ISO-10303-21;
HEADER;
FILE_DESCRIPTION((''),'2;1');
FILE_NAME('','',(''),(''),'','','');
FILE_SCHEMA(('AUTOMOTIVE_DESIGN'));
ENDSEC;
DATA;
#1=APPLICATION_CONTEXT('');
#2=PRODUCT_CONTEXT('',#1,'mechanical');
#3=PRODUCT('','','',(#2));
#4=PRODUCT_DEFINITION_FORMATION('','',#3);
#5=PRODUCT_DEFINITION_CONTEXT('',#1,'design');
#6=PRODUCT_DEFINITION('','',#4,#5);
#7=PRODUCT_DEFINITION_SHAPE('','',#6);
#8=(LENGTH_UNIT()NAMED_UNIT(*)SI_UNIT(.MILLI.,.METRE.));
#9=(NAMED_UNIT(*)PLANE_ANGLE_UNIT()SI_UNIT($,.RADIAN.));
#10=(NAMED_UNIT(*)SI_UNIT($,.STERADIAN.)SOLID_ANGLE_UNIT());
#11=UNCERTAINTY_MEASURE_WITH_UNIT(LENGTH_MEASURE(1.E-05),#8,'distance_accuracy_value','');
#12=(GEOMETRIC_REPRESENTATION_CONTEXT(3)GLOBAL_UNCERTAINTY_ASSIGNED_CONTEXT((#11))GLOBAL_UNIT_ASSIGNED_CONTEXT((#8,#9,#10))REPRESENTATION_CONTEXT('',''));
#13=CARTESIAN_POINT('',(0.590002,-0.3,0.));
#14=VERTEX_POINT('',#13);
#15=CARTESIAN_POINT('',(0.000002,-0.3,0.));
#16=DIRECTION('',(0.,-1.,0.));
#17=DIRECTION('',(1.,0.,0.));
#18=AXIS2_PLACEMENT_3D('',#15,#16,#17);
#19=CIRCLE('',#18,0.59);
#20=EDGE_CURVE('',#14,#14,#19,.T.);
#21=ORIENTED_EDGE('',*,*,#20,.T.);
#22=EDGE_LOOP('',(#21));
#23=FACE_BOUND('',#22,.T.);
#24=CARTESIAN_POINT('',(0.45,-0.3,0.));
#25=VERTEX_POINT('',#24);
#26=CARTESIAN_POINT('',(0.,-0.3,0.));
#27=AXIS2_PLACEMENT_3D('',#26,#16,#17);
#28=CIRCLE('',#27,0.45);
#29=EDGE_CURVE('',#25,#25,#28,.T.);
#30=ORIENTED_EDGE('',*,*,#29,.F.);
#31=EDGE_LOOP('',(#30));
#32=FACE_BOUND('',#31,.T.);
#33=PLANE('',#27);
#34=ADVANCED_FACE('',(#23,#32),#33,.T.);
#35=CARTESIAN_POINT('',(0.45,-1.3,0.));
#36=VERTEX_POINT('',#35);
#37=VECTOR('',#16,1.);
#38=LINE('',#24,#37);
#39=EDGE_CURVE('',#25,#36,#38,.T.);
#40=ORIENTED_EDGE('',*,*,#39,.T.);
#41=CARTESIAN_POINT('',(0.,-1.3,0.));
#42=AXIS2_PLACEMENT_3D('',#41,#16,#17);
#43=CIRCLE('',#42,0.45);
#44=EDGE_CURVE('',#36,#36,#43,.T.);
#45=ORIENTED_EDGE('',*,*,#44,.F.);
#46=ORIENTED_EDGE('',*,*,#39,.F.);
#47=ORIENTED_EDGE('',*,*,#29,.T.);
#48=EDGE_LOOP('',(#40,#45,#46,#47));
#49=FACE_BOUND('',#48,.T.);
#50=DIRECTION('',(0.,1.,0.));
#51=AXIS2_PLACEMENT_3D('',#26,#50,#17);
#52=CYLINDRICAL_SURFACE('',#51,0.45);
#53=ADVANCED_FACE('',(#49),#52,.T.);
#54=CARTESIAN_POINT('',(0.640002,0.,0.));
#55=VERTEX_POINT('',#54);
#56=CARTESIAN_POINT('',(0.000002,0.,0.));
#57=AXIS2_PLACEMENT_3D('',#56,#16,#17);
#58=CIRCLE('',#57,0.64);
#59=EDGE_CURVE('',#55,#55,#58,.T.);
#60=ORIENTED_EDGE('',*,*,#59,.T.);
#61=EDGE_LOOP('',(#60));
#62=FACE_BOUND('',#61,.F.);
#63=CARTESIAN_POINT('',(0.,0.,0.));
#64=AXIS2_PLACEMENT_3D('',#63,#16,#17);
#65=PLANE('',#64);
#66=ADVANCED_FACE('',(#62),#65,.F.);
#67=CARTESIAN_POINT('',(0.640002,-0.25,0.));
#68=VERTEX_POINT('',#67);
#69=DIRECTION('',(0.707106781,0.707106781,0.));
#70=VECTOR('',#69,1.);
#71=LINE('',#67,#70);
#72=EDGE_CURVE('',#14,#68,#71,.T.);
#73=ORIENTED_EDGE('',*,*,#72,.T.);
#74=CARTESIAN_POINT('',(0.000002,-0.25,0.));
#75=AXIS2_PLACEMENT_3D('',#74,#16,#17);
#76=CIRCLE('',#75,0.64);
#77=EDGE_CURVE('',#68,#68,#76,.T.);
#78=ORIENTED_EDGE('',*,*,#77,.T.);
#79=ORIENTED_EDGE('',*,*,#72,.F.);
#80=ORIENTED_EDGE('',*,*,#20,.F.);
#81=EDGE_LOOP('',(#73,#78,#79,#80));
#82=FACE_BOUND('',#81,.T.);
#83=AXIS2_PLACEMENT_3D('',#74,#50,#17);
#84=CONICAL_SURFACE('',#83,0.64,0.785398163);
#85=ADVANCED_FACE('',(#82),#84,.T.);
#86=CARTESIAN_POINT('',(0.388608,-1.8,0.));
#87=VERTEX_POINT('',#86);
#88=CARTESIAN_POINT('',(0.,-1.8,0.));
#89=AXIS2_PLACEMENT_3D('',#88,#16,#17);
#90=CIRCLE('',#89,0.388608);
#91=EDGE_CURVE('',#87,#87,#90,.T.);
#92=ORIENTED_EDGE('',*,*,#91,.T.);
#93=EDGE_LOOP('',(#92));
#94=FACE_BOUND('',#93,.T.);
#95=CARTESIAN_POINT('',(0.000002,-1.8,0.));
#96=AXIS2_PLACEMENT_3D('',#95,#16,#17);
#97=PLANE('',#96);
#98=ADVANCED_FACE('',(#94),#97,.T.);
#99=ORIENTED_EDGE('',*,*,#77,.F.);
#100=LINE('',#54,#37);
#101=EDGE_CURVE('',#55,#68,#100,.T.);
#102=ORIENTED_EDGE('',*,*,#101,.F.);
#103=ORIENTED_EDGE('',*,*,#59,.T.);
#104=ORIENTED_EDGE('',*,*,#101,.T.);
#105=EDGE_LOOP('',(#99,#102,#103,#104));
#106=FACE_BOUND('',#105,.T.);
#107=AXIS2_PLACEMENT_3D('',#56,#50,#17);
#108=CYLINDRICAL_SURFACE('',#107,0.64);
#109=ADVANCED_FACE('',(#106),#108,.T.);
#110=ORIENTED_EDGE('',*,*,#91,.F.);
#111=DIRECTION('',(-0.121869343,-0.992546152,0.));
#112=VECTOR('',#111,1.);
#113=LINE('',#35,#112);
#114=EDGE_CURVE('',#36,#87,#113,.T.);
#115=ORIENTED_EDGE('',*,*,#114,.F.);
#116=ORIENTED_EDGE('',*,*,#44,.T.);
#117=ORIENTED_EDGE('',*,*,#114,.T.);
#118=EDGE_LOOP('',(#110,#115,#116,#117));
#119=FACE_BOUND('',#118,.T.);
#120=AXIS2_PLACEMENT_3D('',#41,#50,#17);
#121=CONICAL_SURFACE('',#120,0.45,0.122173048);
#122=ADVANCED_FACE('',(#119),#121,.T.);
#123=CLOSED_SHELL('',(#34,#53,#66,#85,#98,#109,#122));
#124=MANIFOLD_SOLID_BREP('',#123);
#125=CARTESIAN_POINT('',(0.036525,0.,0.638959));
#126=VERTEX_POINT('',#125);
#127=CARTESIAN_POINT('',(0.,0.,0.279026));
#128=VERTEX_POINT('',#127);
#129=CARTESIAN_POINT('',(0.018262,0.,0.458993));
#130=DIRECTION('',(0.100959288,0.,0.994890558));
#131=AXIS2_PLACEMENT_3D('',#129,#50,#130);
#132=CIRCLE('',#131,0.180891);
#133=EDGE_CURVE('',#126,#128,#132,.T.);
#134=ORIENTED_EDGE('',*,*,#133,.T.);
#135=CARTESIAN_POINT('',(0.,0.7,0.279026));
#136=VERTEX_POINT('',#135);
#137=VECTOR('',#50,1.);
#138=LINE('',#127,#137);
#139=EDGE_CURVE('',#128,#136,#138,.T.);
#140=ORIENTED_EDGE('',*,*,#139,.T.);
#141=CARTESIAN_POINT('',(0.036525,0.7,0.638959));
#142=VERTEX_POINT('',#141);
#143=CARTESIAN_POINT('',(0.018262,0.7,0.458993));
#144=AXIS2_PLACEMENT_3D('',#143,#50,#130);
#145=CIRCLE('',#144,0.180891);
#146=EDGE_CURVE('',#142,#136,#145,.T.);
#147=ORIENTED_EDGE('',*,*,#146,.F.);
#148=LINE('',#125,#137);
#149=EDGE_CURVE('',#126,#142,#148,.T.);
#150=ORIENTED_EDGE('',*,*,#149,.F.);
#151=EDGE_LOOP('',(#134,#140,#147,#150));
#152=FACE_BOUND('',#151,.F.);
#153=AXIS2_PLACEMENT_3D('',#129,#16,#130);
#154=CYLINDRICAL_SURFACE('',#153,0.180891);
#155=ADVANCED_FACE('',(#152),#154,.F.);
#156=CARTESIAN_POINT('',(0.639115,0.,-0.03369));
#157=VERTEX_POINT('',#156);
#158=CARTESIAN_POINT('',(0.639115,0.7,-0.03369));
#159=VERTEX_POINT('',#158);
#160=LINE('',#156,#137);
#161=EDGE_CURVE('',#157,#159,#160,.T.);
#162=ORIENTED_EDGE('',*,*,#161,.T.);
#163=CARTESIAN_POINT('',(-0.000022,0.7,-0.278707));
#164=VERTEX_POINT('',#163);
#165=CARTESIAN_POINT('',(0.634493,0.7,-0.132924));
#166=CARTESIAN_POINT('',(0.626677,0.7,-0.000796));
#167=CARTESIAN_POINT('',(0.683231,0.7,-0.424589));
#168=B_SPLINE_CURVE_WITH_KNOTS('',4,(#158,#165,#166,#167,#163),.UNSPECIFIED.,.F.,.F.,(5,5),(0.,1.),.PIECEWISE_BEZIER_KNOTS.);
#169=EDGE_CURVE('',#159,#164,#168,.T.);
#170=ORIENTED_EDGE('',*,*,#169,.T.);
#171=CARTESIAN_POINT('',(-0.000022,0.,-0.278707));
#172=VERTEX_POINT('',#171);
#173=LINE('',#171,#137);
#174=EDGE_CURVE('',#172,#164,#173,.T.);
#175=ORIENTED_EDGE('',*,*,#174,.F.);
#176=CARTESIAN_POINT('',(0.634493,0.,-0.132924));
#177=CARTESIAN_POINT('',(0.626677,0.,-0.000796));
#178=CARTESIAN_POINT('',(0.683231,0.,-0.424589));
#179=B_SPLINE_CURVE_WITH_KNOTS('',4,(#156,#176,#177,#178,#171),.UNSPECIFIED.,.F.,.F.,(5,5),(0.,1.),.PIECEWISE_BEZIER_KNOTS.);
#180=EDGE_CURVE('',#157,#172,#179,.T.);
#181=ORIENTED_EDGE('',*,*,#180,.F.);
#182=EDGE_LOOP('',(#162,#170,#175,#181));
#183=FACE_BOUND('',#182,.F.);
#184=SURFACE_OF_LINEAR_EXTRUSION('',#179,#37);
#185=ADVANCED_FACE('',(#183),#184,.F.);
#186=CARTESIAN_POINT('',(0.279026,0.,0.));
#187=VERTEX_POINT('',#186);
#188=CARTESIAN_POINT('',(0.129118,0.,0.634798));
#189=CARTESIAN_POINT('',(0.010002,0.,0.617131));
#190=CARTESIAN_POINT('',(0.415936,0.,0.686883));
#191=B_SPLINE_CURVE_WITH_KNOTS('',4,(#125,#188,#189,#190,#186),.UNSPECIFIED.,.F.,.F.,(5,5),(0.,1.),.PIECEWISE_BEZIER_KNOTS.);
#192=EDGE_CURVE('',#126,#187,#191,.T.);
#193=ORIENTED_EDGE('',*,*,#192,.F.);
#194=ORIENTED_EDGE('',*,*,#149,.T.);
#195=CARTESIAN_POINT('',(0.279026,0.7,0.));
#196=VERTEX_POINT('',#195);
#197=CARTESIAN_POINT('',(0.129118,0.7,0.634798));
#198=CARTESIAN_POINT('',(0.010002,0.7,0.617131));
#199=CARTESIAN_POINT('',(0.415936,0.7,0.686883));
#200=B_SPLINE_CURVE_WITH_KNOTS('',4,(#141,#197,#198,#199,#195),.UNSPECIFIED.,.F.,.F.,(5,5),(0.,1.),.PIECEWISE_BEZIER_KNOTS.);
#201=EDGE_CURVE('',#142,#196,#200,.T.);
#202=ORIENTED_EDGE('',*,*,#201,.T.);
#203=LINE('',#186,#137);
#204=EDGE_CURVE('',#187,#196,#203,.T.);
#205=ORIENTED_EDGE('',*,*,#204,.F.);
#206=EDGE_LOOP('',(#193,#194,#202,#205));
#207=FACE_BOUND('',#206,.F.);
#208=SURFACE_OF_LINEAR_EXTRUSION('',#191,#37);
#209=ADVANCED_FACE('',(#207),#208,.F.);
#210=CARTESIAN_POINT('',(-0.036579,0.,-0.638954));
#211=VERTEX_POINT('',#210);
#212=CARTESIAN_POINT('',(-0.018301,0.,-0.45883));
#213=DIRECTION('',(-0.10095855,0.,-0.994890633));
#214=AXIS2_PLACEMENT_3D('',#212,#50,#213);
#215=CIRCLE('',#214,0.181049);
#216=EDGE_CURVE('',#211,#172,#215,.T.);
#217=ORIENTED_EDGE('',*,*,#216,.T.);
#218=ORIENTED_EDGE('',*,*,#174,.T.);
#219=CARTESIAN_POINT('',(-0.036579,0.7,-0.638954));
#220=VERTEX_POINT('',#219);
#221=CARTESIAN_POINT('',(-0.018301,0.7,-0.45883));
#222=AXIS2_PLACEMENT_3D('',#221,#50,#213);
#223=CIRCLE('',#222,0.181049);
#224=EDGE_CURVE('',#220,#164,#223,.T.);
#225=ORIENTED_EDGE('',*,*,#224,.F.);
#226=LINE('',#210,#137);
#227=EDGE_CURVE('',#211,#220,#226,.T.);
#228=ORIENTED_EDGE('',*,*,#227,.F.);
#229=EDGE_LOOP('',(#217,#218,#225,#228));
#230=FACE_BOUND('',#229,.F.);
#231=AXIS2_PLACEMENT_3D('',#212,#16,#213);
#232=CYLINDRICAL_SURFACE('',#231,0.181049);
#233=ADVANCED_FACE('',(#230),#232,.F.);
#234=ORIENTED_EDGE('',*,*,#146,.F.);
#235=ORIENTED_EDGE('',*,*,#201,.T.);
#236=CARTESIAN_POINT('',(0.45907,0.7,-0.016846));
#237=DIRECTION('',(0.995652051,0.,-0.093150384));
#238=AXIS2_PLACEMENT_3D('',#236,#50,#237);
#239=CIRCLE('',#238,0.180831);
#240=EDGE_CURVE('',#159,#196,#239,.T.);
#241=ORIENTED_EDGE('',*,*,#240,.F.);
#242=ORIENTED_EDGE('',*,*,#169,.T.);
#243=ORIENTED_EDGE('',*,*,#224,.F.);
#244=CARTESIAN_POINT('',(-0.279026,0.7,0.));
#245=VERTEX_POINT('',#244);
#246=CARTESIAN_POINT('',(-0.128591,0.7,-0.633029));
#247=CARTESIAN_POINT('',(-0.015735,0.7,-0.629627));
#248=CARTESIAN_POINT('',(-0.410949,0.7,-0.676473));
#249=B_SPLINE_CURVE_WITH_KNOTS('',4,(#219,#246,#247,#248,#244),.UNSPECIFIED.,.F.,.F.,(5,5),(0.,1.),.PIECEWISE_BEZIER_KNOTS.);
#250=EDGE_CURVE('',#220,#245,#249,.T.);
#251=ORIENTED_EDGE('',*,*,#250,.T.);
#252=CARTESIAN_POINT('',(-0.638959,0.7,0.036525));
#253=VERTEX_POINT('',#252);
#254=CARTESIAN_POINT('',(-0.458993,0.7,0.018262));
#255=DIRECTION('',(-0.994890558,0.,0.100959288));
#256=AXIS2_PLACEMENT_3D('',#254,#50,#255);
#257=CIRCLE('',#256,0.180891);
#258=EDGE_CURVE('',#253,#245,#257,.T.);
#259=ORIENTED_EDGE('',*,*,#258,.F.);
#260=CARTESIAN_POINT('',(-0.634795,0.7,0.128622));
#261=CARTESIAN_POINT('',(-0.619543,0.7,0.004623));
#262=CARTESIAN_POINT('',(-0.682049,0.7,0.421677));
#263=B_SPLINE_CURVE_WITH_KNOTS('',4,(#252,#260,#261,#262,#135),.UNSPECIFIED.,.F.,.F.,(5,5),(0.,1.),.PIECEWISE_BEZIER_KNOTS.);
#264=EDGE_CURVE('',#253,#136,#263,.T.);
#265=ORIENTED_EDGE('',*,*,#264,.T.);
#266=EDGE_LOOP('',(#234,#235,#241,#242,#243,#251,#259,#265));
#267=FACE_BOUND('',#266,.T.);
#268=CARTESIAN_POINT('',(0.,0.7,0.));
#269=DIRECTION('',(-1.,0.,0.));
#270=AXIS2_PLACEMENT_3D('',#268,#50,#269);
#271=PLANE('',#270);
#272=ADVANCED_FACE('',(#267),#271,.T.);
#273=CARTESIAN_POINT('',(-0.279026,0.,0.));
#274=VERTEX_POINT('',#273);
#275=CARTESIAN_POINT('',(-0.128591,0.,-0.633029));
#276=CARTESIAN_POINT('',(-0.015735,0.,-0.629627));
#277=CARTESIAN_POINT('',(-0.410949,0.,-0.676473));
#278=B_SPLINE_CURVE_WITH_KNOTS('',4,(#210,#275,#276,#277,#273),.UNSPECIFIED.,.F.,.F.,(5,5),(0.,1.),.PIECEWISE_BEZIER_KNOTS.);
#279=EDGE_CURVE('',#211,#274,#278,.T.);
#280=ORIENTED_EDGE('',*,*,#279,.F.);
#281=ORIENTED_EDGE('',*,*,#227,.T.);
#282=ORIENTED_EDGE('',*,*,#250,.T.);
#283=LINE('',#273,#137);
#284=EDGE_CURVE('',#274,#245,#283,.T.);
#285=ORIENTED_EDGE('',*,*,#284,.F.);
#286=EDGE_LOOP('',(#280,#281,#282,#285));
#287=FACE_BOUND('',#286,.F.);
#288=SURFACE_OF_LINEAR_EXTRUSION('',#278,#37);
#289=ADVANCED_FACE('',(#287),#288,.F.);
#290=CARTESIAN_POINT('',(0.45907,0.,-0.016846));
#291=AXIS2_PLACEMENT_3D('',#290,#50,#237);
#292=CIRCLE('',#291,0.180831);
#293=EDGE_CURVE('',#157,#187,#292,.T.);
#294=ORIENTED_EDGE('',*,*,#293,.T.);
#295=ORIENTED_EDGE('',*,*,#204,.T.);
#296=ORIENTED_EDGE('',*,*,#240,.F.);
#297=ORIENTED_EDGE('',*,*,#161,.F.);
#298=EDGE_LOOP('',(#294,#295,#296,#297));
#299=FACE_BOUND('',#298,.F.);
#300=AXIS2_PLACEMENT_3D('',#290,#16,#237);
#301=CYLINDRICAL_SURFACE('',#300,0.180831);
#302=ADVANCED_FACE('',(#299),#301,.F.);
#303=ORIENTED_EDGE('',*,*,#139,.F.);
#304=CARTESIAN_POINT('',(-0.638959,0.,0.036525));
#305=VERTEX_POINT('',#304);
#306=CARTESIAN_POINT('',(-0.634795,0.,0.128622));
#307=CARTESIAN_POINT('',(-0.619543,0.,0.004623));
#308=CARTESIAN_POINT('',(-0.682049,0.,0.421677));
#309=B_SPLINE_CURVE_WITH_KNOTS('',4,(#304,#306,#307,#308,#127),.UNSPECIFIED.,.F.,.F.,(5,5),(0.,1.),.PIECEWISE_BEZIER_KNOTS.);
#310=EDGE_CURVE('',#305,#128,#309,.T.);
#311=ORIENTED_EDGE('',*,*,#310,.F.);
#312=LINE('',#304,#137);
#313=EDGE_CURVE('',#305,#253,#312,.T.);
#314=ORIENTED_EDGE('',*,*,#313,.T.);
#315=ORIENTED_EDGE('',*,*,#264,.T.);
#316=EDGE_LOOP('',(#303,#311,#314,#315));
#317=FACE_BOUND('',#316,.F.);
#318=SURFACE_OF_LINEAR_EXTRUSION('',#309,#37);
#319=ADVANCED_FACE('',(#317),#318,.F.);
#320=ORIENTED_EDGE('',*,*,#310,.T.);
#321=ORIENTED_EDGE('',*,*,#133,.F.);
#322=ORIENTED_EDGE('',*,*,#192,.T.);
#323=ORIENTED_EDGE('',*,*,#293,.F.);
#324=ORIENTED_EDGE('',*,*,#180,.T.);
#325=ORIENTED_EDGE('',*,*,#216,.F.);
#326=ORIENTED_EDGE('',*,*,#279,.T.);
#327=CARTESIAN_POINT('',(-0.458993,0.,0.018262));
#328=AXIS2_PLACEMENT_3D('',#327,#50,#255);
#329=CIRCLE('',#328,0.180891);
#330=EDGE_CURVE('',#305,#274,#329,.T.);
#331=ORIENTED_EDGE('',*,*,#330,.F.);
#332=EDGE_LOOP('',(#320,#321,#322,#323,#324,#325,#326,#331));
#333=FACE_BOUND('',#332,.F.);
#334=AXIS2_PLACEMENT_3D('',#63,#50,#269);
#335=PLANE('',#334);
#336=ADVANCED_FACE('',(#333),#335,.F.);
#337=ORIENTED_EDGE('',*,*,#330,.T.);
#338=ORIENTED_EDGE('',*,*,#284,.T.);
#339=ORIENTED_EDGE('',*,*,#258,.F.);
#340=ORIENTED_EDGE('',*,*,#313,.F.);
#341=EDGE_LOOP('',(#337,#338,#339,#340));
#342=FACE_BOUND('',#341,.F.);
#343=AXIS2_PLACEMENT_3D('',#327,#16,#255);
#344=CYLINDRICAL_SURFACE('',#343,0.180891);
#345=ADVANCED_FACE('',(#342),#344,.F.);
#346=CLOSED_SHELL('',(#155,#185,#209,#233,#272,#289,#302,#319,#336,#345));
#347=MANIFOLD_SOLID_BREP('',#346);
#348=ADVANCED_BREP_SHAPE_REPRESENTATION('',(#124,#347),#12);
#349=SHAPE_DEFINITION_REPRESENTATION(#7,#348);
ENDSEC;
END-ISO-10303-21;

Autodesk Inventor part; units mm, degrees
ref_plane "YZ Plane" through (0, 0, 0) normal (1, 0, 0) x (0, 1, 0)
ref_plane "XZ Plane" through (0, 0, 0) normal (0, 1, 0) x (-1, 0, 0)
ref_plane "XY Plane" through (0, 0, 0) normal (0, 0, 1) x (1, 0, 0)
sketch "Sketch2" plane through (0, 0, 0) normal (0, 1, 0) x (-1, 0, 0)
  line L0 (-0.279026, 0.279026) -> (0.279026, -0.279026) construction
  line L1 (0.279026, 0.279026) -> (-0.279026, -0.279026) construction
  spline S0 degree 4 poles (-0.639115, -0.03369) (-0.634493, -0.132924) (-0.626677, -0.000796) (-0.683231, -0.424589) (0.000022, -0.278707) knots 0 0 0 0 0 1 1 1 1 1
  spline S1 degree 4 poles (0.036579, -0.638954) (0.128591, -0.633029) (0.015735, -0.629627) (0.410949, -0.676473) (0.279026, 0) knots 0 0 0 0 0 1 1 1 1 1
  spline S2 degree 4 poles (-0.036525, 0.638959) (-0.129118, 0.634798) (-0.010002, 0.617131) (-0.415936, 0.686883) (-0.279026, 0) knots 0 0 0 0 0 1 1 1 1 1
  spline S3 degree 4 poles (0.638959, 0.036525) (0.634795, 0.128622) (0.619543, 0.004623) (0.682049, 0.421677) (0, 0.279026) knots 0 0 0 0 0 1 1 1 1 1
  arc A0 (-0.639115, -0.03369) -> (-0.279026, 0) centre (-0.45907, -0.016845) ccw
  arc A1 (0.036579, -0.638954) -> (0.000022, -0.278707) centre (0.0183, -0.45883) ccw
  arc A2 (0.638959, 0.036525) -> (0.279026, 0) centre (0.458993, 0.018263) ccw
  arc A3 (-0.036525, 0.638959) -> (0, 0.279026) centre (-0.018263, 0.458993) ccw
  circle A4 centre (0, 0) radius 0.64
  point P0 (0.072027, -0.636054)
  point P1 (0.088403, -0.633939)
  point P2 (0.119628, -0.625229)
  point P3 (-0.071713, 0.635654)
  point P4 (-0.087466, 0.632637)
  point P5 (-0.11823, 0.62326)
  point P6 (0.635846, 0.070961)
  point P7 (0.633021, 0.08595)
  point P8 (0.62382, 0.11598)
  point P9 (-0.636387, -0.071601)
  point P10 (-0.634237, -0.087213)
  point P11 (-0.625654, -0.117837)
  dimension "d14" = 1.28
sketch "Sketch2 outline for Extrusion1" plane through (0, 0, 0) normal (0, 1, 0) x (-1, 0, 0)
  arc A0 (-0.639115, -0.03369) -> (-0.279026, 0) centre (-0.45907, -0.016845) ccw
  spline S0 degree 4 poles (-0.036525, 0.638959) (-0.129118, 0.634798) (-0.010002, 0.617131) (-0.415936, 0.686883) (-0.279026, 0) knots 0 0 0 0 0 1 1 1 1 1
  arc A1 (-0.036525, 0.638959) -> (0, 0.279026) centre (-0.018263, 0.458993) ccw
  spline S1 degree 4 poles (0.638959, 0.036525) (0.634795, 0.128622) (0.619543, 0.004623) (0.682049, 0.421677) (0, 0.279026) knots 0 0 0 0 0 1 1 1 1 1
  arc A2 (0.638959, 0.036525) -> (0.279026, 0) centre (0.458993, 0.018263) ccw
  spline S2 degree 4 poles (0.036579, -0.638954) (0.128591, -0.633029) (0.015735, -0.629627) (0.410949, -0.676473) (0.279026, 0) knots 0 0 0 0 0 1 1 1 1 1
  arc A3 (0.036579, -0.638954) -> (0.000022, -0.278707) centre (0.0183, -0.45883) ccw
  spline S3 degree 4 poles (-0.639115, -0.03369) (-0.634493, -0.132924) (-0.626677, -0.000796) (-0.683231, -0.424589) (0.000022, -0.278707) knots 0 0 0 0 0 1 1 1 1 1
extrude "Extrusion1" add sketch "Sketch2 outline for Extrusion1" along normal blind 0.7
sketch "Sketch5" plane through (0, 0, 0) normal (0, -1, 0) x (1, 0, 0)
  circle A0 centre (0.000002, 0) radius 0.64
  point P0 (0.639115, -0.03369)
  dimension "d15" = 1.28
extrude "Extrusion2" add sketch "Sketch5" along normal blind 0.3 separate body
sketch "Sketch6" plane through (0.000002, -0.3, 0) normal (0, -1, 0) x (1, 0, 0)
  circle A0 centre (-0.000002, 0) radius 0.45
  circle A1 centre (-0.000002, 0) radius 0.25
  dimension "d6" = 0.5
  dimension "d7" = 0.9
extrude "Extrusion3" add sketch "Sketch6" along normal blind 1.5 contours A0 | A1 bodies 2
chamfer "Chanfrein1" distance 0.5 angle 7 1 edges at (-0.45, -1.8, 0) measured on face at (0.4485, -1.3, -0.0362)
chamfer "Chanfrein2" distance 0.05 angle 45 1 edges at (-0.64, -0.3, 0)
properties part number "1.3mm_uncorrected"
